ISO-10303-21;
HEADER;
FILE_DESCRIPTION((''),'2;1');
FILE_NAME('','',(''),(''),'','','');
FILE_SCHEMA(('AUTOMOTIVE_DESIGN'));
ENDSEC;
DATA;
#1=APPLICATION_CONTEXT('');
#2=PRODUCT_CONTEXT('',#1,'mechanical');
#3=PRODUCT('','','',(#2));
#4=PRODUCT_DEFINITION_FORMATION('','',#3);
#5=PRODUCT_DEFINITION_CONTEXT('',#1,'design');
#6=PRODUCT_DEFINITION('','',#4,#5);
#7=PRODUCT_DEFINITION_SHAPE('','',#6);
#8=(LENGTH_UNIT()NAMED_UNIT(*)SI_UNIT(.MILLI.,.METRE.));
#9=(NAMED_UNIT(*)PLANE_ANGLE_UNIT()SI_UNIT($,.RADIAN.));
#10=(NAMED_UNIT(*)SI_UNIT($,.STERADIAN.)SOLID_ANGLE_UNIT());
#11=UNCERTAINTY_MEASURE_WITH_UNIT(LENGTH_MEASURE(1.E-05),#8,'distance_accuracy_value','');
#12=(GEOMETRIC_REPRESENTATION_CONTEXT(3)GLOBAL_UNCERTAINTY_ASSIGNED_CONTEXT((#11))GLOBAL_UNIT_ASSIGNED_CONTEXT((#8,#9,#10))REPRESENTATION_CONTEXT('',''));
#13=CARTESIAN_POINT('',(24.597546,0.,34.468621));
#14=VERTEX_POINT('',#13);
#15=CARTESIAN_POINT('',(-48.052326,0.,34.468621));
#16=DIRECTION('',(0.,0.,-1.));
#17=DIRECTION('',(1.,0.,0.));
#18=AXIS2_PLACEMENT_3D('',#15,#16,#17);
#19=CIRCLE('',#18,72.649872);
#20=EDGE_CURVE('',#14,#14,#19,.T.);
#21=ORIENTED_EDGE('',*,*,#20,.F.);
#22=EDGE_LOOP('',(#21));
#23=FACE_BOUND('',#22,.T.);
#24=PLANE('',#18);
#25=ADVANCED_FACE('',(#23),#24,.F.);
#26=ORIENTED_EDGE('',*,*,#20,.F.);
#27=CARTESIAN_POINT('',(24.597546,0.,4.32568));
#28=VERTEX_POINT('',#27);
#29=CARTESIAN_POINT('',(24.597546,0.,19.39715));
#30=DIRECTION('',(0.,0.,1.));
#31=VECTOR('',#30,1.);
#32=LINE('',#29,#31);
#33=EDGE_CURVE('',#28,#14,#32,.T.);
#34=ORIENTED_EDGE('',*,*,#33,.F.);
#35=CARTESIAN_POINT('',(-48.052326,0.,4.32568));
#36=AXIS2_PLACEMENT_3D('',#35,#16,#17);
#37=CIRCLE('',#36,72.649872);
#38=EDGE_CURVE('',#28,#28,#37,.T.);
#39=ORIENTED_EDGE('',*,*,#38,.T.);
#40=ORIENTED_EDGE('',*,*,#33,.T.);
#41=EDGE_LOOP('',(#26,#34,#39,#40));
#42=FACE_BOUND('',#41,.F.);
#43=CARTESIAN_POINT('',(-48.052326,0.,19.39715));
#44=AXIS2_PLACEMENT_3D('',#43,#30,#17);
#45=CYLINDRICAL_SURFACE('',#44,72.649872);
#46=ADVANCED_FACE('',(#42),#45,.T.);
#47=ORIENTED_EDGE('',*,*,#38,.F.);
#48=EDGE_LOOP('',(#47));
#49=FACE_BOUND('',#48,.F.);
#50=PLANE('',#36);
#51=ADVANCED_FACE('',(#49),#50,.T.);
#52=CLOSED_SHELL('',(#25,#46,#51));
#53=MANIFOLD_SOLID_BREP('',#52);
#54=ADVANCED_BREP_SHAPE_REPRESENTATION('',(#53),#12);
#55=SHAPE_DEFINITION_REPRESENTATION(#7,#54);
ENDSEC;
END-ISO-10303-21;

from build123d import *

# Parameters (mm, degrees)
F0_W = 72.6498719305
F0_H = 30.1429410465


# Not quite as in the source:
# - the program builds the solid bodies; features that only make, move or delete a surface that nothing else refers to are left out


with BuildPart() as f1:
    # F0 (on Front) → F1 (revolve)
    with BuildSketch(Plane.XZ):
        with Locations((-11.7273898795, 19.3971504923)):
            Rectangle(F0_W, F0_H)
    revolve(axis=Axis((-48.0523258448, 0, 19.3971504923), (0, 0, -1)))


solid = f1.part
